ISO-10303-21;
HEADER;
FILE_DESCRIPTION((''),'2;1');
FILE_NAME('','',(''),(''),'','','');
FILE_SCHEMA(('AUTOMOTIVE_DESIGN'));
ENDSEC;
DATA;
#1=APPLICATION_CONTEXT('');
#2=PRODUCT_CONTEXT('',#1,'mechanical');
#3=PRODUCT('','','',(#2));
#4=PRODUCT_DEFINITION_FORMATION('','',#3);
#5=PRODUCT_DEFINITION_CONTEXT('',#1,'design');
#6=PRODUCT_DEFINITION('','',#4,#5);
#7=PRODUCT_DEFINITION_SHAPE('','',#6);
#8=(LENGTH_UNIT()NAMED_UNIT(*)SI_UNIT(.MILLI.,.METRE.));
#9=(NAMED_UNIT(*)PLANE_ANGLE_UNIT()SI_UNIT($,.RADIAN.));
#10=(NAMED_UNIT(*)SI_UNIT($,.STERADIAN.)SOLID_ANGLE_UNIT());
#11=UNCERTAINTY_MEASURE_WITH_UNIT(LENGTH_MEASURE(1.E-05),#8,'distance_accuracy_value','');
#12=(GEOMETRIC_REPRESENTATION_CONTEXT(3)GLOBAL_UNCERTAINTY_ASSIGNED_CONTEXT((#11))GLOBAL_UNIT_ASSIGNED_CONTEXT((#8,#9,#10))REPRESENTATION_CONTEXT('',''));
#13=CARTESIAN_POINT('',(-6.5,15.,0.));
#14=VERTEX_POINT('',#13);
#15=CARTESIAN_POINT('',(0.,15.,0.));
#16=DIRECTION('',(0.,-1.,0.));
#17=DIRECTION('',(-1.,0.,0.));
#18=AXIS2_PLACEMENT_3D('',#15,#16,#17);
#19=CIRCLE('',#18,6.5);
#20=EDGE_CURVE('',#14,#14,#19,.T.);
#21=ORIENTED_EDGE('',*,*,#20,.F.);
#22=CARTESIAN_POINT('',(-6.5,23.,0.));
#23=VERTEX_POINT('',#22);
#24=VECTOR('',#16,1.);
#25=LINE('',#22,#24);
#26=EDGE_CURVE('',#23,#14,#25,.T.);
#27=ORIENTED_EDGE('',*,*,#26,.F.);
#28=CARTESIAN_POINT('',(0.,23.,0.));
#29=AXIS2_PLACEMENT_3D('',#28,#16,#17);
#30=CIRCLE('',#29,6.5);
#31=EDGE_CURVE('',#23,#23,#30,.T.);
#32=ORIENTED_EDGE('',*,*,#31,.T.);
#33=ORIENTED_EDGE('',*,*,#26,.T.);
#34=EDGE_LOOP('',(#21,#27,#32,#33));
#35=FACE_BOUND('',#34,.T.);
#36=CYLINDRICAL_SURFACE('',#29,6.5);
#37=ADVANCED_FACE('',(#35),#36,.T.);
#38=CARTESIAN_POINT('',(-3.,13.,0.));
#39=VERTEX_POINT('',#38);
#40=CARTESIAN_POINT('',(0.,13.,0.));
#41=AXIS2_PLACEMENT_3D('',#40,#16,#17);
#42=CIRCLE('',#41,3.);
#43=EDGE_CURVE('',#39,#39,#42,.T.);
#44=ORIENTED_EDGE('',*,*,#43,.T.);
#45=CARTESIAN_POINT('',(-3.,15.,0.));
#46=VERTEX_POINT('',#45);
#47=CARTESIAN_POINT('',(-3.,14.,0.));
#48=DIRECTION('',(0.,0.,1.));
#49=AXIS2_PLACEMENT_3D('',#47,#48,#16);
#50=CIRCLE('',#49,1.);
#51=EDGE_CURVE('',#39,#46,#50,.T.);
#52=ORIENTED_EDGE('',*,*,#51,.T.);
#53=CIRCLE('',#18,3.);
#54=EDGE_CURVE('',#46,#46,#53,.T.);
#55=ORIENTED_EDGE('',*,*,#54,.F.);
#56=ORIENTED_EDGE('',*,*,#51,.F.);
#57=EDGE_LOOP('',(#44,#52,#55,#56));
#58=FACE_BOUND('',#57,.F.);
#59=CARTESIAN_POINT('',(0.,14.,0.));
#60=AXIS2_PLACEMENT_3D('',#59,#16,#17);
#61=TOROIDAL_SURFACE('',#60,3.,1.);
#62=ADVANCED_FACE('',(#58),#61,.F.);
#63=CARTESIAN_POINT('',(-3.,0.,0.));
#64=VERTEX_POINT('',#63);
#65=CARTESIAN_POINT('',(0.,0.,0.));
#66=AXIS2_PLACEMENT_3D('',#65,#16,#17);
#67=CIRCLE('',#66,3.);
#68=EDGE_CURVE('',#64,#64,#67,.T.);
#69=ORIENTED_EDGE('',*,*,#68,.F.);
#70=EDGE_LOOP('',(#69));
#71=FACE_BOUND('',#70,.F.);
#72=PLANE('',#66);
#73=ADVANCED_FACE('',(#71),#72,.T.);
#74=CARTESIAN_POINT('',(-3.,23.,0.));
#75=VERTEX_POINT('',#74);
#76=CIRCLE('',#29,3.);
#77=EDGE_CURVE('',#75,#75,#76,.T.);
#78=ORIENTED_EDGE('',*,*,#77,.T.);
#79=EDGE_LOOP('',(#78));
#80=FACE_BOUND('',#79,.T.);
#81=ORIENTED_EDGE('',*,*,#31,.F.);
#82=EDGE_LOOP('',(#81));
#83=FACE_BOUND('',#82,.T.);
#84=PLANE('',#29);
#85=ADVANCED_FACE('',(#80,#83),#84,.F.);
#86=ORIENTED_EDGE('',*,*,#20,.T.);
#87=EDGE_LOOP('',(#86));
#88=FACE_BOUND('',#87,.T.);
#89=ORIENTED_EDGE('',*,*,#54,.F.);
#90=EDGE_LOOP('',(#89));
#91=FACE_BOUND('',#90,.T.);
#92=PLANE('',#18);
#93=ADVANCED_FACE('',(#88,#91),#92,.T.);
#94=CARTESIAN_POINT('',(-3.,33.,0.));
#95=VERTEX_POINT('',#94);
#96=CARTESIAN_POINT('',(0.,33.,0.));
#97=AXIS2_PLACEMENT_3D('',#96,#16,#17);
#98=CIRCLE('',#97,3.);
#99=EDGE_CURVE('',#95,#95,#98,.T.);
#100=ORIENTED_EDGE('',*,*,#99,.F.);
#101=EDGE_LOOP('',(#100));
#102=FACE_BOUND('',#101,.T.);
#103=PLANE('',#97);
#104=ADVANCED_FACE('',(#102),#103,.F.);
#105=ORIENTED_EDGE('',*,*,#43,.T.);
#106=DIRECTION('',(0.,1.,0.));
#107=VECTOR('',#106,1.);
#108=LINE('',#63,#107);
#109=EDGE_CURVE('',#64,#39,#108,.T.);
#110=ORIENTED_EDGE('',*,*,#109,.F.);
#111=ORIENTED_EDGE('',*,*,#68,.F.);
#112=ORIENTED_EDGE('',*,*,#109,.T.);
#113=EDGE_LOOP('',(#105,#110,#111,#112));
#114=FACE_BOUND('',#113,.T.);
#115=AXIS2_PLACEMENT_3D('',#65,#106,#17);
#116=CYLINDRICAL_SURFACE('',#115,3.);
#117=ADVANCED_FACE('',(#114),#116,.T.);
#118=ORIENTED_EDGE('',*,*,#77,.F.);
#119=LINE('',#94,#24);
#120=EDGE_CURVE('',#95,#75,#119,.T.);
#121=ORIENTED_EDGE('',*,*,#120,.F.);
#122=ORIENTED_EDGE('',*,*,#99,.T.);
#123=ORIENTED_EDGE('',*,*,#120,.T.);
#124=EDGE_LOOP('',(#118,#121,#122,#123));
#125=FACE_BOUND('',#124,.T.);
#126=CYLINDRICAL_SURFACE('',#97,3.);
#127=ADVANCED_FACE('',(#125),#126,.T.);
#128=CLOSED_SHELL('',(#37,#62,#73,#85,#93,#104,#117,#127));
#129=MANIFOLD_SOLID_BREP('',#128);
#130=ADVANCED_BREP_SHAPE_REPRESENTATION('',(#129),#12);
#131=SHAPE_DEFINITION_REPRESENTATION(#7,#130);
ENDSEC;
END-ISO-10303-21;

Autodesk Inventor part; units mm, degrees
ref_plane "YZ Plane" through (0, 0, 0) normal (1, 0, 0) x (0, 1, 0)
ref_plane "XZ Plane" through (0, 0, 0) normal (0, 1, 0) x (-1, 0, 0)
ref_plane "XY Plane" through (0, 0, 0) normal (0, 0, 1) x (1, 0, 0)
sketch "Boceto1" plane through (0, 0, 0) normal (0, 0, 1) x (1, 0, 0)
  line L0 (0, 33) -> (-3, 33)
  line L1 (-3, 33) -> (-3, 23)
  line L2 (-3, 23) -> (-6.5, 23)
  line L3 (-6.5, 23) -> (-6.5, 15)
  line L4 (-6.5, 15) -> (-3, 15)
  line L5 (0, 0) -> (-3, 0)
  line L6 (0, 33) -> (0, 0)
  line L7 (-3, 0) -> (-3, 13)
  arc A0 (-3, 13) -> (-3, 15) centre (-3, 14) ccw
  line L8 (-3, 14) -> (-3, 13) construction
  dimension "d0" = 33
  dimension "d2" = 3
  dimension "d3" = 3
  dimension "d6" = 6.5
  dimension "d7" = 13
  dimension "d8" = 10
  dimension "d9" = 15
revolve "Revolución1" add sketch "Boceto1" angle 360 about axis through (0, 33, 0) along (0, -1, 0)
thread "Rosca1" size "M6x1" class "6g" standard "ANSI Metric M Profile" length 13
thread "Rosca2" size "M6x1" class "6g" standard "ANSI Metric M Profile" length 8
properties part number "sensor_tension"
